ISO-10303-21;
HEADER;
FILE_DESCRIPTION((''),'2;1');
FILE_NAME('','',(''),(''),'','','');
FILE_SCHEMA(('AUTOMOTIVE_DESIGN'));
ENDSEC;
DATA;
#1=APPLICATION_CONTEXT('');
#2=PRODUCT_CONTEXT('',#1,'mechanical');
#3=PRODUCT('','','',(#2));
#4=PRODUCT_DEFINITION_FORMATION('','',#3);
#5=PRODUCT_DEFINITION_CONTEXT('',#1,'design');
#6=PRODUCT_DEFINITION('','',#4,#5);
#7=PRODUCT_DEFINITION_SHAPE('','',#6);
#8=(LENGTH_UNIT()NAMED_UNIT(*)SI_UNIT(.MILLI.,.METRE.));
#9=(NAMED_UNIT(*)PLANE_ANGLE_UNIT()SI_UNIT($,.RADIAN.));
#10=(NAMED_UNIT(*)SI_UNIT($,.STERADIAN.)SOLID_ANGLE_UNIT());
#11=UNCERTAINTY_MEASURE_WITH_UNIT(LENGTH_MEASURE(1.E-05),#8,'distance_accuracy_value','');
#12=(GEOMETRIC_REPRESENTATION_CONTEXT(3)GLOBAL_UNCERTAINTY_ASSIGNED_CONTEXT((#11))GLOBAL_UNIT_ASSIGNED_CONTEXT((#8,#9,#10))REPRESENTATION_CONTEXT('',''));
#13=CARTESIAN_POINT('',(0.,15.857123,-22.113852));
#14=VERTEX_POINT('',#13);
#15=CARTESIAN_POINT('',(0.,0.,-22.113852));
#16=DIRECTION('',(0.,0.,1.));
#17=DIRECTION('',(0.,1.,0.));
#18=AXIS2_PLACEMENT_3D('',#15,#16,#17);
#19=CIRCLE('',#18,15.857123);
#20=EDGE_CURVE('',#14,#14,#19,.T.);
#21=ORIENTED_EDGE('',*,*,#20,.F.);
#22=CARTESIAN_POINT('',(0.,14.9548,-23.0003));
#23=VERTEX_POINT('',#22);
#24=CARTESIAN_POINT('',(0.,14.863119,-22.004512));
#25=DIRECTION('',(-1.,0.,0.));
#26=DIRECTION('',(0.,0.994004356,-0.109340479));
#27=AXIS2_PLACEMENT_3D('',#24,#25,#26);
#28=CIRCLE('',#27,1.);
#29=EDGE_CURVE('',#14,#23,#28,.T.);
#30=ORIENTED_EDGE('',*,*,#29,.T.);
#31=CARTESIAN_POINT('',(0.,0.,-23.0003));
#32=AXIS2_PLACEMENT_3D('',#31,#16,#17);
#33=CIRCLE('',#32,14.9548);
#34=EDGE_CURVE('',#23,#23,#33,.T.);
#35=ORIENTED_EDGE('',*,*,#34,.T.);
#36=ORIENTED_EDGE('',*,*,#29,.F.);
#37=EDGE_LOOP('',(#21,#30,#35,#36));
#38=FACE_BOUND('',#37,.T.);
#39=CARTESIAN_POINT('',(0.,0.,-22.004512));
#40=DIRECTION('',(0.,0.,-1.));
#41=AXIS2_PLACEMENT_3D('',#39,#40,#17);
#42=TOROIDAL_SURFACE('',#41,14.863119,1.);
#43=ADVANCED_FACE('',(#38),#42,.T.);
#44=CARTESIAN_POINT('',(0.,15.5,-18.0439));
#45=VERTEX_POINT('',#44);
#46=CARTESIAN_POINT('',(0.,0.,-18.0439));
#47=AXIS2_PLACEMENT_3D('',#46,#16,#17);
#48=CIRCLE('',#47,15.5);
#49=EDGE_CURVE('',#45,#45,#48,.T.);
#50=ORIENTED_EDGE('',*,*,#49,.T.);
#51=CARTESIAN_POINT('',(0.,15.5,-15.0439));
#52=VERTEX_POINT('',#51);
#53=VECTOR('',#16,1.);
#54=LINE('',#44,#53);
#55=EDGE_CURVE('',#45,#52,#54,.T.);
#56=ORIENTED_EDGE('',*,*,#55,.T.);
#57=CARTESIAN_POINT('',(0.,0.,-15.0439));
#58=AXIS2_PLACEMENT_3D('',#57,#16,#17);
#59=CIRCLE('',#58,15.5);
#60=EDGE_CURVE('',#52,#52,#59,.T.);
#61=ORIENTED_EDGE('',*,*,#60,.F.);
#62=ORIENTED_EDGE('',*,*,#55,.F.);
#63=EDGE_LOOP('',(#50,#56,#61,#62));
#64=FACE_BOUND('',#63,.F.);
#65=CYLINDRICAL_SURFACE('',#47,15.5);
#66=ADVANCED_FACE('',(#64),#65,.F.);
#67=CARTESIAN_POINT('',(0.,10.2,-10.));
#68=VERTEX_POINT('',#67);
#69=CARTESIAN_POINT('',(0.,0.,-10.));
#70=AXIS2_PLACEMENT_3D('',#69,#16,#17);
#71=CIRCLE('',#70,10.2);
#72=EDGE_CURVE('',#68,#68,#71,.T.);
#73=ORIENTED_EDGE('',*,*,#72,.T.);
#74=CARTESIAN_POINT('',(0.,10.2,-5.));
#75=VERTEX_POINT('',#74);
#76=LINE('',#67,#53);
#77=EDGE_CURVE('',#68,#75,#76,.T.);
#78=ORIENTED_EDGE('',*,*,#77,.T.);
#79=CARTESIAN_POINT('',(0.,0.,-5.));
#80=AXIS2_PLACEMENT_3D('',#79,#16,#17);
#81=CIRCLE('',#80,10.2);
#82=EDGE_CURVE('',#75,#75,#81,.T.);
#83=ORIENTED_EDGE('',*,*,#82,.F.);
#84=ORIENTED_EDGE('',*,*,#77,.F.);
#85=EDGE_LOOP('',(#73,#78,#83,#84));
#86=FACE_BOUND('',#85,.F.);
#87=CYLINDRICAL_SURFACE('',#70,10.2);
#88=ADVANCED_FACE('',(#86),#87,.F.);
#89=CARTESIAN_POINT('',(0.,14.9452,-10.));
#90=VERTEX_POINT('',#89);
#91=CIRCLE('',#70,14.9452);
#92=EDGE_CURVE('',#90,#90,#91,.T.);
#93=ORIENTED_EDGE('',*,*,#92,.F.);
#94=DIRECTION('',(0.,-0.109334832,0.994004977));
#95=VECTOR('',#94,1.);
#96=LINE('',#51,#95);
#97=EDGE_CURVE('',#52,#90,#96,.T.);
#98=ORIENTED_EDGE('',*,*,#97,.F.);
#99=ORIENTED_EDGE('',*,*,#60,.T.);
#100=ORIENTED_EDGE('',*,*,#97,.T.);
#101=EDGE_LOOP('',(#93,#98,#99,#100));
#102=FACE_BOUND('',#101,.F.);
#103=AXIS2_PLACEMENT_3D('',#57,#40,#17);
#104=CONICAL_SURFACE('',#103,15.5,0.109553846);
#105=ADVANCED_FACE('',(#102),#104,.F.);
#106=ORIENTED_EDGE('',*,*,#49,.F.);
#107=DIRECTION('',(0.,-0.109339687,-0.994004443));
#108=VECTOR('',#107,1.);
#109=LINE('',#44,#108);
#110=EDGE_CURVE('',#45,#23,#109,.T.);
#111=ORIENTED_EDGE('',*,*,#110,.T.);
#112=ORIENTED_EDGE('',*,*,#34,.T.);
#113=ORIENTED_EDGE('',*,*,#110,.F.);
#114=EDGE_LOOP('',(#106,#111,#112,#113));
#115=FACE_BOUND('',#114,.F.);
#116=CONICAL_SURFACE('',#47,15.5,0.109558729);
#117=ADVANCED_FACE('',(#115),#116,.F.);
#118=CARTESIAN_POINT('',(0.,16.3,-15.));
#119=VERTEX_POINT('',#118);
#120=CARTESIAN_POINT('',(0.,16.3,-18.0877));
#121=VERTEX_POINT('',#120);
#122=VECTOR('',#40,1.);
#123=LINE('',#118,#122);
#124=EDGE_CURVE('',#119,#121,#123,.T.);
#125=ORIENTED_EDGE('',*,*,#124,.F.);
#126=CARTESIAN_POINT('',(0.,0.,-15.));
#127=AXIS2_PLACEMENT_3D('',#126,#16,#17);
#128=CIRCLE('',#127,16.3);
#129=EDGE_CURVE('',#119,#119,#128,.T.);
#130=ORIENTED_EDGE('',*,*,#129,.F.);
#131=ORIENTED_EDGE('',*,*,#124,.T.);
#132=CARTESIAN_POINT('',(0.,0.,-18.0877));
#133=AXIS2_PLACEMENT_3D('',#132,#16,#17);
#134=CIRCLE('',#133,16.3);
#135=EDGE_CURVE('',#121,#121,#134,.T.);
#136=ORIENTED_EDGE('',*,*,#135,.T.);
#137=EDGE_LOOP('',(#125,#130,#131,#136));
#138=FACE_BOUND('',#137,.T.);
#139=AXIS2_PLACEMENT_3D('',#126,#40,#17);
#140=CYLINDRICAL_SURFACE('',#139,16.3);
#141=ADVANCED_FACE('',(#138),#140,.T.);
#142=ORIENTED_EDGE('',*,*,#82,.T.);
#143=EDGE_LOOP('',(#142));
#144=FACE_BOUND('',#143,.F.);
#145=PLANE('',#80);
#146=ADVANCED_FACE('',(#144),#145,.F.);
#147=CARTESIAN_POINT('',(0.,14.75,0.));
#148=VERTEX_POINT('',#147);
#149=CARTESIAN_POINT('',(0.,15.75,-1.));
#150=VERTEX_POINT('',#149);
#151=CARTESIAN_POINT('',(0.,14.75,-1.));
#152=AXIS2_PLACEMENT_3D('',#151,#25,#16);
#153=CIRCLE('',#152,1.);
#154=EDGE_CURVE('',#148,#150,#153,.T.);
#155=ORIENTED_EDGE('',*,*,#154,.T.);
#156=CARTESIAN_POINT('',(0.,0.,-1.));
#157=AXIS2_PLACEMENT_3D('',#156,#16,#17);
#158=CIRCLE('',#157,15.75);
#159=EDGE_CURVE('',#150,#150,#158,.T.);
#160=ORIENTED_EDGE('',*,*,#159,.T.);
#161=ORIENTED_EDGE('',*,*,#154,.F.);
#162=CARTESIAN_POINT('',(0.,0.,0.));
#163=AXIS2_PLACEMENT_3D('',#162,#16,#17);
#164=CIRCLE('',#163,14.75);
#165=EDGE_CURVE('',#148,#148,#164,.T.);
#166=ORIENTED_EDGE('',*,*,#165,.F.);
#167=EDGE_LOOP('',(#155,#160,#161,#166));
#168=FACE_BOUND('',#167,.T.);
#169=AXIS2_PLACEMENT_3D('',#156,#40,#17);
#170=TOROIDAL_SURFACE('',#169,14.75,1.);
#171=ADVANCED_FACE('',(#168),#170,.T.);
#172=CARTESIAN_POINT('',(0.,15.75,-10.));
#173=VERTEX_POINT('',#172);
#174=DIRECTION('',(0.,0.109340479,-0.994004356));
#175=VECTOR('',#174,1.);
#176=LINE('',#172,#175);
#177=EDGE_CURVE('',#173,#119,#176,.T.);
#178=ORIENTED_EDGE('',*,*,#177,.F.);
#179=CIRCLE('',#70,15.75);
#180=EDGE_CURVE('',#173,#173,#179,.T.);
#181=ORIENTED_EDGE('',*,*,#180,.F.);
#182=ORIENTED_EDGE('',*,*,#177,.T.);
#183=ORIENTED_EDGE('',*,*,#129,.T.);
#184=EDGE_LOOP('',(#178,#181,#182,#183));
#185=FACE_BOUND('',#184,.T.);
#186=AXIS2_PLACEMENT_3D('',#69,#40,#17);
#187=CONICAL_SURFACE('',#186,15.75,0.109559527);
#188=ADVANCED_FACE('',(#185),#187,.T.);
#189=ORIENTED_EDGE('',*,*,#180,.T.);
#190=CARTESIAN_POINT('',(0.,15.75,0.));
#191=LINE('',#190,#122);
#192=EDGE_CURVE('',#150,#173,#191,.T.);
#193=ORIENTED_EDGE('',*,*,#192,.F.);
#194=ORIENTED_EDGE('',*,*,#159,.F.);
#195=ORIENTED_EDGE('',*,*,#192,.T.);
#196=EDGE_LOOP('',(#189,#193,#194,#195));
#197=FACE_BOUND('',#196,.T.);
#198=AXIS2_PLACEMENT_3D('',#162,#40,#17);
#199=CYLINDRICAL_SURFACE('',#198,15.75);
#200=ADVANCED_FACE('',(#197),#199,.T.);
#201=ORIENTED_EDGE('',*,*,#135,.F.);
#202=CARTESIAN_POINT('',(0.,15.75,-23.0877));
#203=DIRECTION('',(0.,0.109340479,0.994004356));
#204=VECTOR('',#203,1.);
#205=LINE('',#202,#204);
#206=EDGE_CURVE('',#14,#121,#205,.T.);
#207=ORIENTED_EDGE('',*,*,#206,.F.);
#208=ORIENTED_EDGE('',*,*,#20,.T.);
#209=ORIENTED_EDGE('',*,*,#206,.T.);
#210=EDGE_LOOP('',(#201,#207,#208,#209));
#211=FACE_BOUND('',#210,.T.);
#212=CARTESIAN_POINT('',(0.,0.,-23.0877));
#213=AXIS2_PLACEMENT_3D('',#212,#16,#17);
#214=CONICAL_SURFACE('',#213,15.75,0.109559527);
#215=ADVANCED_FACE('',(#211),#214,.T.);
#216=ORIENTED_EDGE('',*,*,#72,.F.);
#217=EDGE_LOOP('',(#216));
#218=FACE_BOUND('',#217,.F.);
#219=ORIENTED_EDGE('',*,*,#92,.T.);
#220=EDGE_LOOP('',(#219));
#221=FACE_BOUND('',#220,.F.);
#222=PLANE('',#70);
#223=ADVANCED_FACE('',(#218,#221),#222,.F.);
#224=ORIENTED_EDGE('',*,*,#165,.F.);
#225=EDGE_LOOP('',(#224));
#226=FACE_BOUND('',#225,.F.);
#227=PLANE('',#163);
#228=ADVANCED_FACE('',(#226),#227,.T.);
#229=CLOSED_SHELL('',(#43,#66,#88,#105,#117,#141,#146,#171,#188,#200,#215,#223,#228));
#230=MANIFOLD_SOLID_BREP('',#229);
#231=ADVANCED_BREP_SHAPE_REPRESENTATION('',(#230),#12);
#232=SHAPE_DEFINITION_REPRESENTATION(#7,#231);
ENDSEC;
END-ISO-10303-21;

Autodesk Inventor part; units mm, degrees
ref_plane "YZ Plane" through (0, 0, 0) normal (1, 0, 0) x (0, 1, 0)
ref_plane "XZ Plane" through (0, 0, 0) normal (0, 1, 0) x (-1, 0, 0)
ref_plane "XY Plane" through (0, 0, 0) normal (0, 0, 1) x (1, 0, 0)
sketch "Sketch1" plane through (0, 0, 0) normal (1, 0, 0) x (0, 1, 0)
  line L0 (0, 0) -> (15.75, 0)
  line L1 (15.75, 0) -> (15.75, -10)
  line L2 (15.75, -10) -> (10.2, -10)
  line L3 (10.2, -10) -> (10.2, -5)
  line L4 (10.2, -5) -> (0, -5)
  line L5 (0, -5) -> (0, 0)
  point P0 (0, -2.5)
  point P1 (15.75, -5)
  point P2 (7.875, 0)
  dimension "d0" = 15.75
  dimension "d1" = 10.2
  dimension "d2" = 10
  dimension "d3" = 5
revolve "Revolution1" add sketch "Sketch1" angle 360 about axis through (0, 0, -5) along (0, 0, 1)
sketch "Sketch3" plane through (0, 0, 0) normal (1, 0, 0) x (0, 1, 0)
  line L0 (15.75, 0) -> (-15.75, 0) projected
  line L1 (15.75, -10) -> (-15.75, -10) projected
  line L2 (15.75, -10) -> (15.75, 0) projected
  line L3 (15.75, -10) -> (16.3, -15)
  line L4 (15.5, -15.0439) -> (14.9452, -10)
  line L5 (14.9452, -10) -> (15.75, -10)
  line L6 (0, -24.0479) -> (0, 4.008) projected
  line L7 (16.3, -15) -> (16.3, -18.0877)
  line L8 (15.5, -18.0439) -> (15.5, -15.0439)
  line L9 (15.5, -18.0439) -> (14.9548, -23.0003)
  line L10 (14.9548, -23.0003) -> (15.75, -23.0877)
  line L11 (15.75, -23.0877) -> (16.3, -18.0877)
  point P0 (0, 0)
  point P1 (0, 0)
  point P2 (15.2274, -20.5221)
  dimension "d14" = 0.8
  dimension "d15" = 16.3
  dimension "d16" = 5
  dimension "d19" = 0.8
  dimension "d21" = 3
  dimension "d22" = 5
  dimension "d25" = 0.8
revolve "Revolution2" add sketch "Sketch3" angle 360 about axis through (0, 0, -10) along (0, 0, 1) contours L3 L7 L11 L10 L9 L8 L4 L1
fillet "Fillet2" radius 1 2 edges at (0, -15.75, 0) (0, -15.75, -23.0877)
properties part number "Spring_Top_3DPrint"
